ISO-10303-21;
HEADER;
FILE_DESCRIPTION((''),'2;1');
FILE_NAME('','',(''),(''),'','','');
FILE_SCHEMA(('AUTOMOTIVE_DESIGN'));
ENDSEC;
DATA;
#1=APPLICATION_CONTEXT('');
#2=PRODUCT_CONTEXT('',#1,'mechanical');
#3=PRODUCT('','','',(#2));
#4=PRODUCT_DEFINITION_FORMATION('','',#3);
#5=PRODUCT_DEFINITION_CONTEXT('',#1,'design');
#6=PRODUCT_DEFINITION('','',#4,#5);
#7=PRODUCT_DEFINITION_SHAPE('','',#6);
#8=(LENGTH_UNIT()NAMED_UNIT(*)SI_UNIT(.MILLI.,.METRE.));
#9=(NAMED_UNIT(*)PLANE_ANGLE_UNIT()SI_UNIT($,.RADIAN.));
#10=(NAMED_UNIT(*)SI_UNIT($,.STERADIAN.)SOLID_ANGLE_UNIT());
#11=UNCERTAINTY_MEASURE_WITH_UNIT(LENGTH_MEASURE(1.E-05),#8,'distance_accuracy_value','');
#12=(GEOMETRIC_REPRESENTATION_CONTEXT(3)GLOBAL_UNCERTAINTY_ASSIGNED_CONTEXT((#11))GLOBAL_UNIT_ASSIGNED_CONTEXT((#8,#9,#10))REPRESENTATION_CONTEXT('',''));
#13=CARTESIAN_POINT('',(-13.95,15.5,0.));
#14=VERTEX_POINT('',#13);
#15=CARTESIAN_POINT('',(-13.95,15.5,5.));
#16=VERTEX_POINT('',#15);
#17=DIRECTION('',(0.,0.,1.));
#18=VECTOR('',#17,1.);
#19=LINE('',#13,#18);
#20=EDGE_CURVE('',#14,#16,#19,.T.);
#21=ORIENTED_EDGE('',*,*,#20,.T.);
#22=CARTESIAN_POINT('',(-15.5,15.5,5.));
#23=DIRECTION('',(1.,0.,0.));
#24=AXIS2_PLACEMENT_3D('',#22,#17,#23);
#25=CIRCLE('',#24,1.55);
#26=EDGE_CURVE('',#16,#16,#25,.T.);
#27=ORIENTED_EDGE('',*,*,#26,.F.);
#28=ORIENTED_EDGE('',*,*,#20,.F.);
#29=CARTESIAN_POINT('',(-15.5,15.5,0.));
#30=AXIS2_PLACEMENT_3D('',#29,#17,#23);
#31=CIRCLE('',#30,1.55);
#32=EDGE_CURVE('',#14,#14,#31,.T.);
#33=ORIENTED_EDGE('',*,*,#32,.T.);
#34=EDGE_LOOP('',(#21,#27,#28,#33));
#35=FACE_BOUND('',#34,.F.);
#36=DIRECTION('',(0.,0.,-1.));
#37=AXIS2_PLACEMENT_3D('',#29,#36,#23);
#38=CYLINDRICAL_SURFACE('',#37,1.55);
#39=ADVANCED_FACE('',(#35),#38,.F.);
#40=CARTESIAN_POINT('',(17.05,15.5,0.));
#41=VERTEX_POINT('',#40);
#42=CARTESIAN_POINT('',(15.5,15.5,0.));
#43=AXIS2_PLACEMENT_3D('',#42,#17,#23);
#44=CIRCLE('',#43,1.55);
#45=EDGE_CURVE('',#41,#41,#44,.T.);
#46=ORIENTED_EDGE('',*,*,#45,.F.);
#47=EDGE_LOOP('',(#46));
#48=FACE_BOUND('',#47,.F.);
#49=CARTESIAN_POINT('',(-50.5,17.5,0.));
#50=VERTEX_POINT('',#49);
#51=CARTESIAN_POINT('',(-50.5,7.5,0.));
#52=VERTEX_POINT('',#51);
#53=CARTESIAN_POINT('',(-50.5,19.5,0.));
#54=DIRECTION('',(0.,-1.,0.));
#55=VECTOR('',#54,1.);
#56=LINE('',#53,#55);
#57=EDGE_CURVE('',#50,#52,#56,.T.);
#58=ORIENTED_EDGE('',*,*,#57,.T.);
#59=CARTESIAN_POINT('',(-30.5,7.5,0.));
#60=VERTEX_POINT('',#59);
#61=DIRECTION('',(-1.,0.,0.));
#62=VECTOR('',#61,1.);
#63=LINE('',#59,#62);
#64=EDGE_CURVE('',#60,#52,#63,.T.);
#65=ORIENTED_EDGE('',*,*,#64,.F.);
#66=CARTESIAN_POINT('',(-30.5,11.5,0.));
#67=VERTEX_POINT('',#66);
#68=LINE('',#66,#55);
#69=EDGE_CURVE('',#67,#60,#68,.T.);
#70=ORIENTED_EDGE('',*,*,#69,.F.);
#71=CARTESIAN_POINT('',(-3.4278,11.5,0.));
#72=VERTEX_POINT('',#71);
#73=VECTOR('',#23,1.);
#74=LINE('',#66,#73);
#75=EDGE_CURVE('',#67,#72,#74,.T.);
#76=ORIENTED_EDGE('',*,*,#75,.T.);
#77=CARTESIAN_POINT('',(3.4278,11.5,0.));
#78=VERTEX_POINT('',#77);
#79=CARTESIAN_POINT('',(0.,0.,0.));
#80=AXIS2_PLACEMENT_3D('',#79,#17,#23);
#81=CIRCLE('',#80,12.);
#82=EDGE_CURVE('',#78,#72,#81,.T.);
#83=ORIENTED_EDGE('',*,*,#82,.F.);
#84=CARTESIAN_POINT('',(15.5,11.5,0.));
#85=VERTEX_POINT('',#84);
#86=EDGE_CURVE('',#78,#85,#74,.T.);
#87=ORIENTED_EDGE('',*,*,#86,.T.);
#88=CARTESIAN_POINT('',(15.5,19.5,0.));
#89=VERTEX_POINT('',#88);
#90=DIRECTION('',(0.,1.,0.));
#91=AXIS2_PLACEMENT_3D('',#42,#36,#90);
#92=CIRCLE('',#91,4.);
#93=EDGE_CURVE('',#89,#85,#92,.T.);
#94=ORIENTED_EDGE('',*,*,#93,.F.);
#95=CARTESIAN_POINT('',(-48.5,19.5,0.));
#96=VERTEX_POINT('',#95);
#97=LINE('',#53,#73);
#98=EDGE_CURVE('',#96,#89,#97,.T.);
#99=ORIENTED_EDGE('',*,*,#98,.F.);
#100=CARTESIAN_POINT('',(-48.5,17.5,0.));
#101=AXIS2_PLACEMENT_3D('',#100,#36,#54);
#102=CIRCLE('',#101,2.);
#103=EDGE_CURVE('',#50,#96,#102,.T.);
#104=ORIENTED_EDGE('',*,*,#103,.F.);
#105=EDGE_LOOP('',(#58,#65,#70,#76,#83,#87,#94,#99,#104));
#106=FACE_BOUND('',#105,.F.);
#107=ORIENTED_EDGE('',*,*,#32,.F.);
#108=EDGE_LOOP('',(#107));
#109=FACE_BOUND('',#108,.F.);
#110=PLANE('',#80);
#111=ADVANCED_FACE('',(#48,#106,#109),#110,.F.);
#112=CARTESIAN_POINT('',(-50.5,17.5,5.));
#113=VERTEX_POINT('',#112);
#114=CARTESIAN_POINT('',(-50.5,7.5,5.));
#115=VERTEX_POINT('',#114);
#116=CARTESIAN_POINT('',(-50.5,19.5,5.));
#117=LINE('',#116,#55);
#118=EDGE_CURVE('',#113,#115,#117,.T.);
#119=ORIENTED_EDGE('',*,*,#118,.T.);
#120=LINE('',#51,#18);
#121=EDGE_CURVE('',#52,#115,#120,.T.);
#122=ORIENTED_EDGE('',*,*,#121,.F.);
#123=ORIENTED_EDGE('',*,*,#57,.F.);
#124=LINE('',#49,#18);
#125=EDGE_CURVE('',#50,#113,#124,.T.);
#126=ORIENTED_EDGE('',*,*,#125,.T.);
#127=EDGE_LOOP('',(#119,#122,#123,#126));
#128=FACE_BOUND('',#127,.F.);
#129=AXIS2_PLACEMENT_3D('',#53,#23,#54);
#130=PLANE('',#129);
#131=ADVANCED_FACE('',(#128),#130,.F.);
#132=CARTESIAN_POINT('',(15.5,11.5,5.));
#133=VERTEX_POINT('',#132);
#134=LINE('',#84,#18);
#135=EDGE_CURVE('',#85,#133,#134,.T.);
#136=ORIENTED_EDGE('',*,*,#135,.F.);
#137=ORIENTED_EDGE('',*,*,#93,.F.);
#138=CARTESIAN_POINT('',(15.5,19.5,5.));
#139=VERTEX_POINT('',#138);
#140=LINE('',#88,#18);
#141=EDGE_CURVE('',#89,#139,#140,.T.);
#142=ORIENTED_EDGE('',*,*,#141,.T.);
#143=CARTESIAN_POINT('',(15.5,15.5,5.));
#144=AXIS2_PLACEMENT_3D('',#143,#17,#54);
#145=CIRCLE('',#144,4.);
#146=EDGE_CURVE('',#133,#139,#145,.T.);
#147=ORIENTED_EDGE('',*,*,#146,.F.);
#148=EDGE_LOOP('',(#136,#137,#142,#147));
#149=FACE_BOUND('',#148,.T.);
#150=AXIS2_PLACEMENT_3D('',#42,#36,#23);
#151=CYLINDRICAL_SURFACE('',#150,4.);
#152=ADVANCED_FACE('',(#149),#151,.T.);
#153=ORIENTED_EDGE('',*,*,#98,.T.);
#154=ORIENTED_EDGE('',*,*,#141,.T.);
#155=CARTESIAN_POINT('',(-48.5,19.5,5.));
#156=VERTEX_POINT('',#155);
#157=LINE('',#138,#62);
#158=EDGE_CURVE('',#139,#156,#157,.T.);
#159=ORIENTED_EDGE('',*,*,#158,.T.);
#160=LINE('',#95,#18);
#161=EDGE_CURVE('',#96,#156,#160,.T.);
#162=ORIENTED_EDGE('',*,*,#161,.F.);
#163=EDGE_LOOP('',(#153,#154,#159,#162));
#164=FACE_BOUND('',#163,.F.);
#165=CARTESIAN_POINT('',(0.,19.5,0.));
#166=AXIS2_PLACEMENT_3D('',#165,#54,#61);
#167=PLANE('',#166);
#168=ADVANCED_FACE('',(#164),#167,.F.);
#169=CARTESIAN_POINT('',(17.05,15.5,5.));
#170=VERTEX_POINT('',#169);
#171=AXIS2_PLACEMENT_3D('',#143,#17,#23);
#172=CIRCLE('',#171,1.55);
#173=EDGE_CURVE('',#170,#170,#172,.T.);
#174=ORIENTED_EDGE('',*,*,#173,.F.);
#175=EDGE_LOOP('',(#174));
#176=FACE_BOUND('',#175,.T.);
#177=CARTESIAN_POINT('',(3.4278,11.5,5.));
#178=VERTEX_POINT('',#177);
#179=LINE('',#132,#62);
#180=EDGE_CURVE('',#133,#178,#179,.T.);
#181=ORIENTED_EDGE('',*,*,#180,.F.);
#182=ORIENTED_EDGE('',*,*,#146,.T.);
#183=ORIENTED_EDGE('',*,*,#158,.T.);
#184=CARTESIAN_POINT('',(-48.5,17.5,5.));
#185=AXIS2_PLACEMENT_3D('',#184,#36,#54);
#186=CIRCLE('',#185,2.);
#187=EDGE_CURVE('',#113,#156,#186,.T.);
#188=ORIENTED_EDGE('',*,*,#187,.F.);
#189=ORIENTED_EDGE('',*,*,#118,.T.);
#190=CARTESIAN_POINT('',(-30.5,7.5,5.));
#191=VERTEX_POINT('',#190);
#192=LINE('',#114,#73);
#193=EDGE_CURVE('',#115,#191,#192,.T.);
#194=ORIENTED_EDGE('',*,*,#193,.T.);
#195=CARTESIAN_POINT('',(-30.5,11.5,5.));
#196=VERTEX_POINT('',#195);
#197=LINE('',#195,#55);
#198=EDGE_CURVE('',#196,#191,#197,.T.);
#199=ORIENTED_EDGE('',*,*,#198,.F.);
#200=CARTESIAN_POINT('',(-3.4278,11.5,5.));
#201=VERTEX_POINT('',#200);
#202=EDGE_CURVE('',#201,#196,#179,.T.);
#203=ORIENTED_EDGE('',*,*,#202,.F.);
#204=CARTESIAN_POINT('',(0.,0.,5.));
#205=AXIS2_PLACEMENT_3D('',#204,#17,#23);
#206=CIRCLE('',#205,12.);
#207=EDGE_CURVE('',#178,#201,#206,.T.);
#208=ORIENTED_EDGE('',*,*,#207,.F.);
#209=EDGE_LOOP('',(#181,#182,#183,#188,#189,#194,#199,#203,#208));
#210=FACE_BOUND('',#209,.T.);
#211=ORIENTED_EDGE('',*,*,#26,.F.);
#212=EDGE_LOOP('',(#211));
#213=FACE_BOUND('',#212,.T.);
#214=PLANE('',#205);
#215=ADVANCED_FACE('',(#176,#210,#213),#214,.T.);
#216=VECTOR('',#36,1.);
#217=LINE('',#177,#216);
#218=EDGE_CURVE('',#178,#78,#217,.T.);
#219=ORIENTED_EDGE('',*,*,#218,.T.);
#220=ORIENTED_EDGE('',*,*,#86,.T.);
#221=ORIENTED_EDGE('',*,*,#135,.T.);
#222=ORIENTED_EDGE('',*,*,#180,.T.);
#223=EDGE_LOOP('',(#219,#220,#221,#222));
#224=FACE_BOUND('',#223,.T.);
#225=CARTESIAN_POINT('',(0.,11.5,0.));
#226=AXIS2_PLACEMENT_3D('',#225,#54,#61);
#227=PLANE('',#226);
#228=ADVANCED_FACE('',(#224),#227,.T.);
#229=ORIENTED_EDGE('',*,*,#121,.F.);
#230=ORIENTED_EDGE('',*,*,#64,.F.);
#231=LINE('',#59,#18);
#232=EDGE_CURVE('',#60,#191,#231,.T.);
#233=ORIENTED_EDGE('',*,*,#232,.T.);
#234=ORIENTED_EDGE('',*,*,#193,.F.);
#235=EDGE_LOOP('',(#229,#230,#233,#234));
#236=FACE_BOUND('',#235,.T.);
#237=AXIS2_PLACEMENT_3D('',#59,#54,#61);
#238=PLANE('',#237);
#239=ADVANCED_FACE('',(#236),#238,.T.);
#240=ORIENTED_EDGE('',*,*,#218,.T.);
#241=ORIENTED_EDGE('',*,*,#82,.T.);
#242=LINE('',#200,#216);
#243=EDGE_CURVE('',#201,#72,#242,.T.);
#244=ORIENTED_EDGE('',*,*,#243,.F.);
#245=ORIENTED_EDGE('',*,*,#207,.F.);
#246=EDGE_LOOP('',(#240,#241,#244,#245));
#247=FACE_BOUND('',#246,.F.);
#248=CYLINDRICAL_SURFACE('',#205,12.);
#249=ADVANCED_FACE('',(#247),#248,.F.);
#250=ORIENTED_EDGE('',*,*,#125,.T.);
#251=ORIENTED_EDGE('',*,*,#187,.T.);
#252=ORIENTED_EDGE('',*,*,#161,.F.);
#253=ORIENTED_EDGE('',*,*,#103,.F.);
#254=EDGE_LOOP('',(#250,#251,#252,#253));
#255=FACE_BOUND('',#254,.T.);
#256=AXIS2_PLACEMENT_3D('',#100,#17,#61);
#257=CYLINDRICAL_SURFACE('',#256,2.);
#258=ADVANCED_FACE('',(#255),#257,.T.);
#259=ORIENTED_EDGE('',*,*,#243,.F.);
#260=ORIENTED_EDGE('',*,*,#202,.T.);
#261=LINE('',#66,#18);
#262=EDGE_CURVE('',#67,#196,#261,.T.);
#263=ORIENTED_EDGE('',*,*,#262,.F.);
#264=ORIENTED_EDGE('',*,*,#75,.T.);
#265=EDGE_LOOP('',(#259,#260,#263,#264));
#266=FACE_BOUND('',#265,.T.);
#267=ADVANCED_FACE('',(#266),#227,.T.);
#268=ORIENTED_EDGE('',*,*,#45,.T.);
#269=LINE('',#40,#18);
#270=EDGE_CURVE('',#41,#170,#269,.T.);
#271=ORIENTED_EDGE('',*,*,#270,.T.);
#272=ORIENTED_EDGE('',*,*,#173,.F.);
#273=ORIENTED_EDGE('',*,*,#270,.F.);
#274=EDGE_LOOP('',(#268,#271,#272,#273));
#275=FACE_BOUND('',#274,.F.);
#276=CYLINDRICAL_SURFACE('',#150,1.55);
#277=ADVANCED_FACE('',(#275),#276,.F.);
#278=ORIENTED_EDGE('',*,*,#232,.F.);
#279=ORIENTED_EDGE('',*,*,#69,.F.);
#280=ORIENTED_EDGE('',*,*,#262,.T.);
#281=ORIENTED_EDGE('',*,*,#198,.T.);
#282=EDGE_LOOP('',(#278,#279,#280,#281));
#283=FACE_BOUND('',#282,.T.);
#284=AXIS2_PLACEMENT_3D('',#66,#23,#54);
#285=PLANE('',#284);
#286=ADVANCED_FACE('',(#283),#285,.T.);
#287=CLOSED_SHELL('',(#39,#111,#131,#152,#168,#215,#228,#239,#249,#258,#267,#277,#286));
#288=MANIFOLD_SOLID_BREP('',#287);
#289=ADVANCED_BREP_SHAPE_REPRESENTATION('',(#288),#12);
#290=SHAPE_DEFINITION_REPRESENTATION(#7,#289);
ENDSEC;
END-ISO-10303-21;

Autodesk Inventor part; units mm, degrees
ref_plane "YZ Plane" through (0, 0, 0) normal (1, 0, 0) x (0, 1, 0)
ref_plane "XZ Plane" through (0, 0, 0) normal (0, 1, 0) x (-1, 0, 0)
ref_plane "XY Plane" through (0, 0, 0) normal (0, 0, 1) x (1, 0, 0)
sketch "Skizze1" plane through (0, 0, 0) normal (0, 0, 1) x (1, 0, 0)
  line L0 (0, -28.5) -> (0, 27.5) projected
  line L1 (-71.9, 0) -> (35.9, 0) projected
  circle A0 centre (-15.5, 15.5) radius 1.55
  circle A1 centre (15.5, 15.5) radius 1.55
  circle A2 centre (-15.5, -15.5) radius 1.55
  circle A3 centre (15.5, -15.5) radius 1.55
  circle A4 centre (-16.5, 0) radius 11
  circle A5 centre (0, 0) radius 5.5
  circle A6 centre (-16.5, 0) radius 4
  arc A7 (-16.5, -7.5) -> (-16.5, 7.5) centre (-16.5, 0) ccw
  line L2 (-16.5, 7.5) -> (-36.5, 7.5)
  line L3 (-36.5, 7.5) -> (-56.5, 7.5)
  line L4 (-56.5, 7.5) -> (-56.5, -7.5)
  line L5 (-56.5, -7.5) -> (-16.5, -7.5)
  circle A8 centre (15.5, 15.5) radius 4
  circle A9 centre (15.5, -15.5) radius 5
  circle A10 centre (-15.5, 15.5) radius 4
  circle A11 centre (-15.5, -15.5) radius 4
  line L6 (15.5, 11.5) -> (-15.5, 11.5)
  line L7 (15.5, 19.5) -> (-15.5, 19.5)
  line L8 (-15.5, 19.5) -> (-50.5, 19.5)
  line L9 (-50.5, 19.5) -> (-50.5, 7.5)
  line L10 (-15.5, 11.5) -> (-30.5, 11.5)
  line L11 (-30.5, 11.5) -> (-30.5, 7.5)
  dimension "d0" = 3.1
  dimension "d1" = 15.5
  dimension "d2" = 15.5
  dimension "d3" = 22
  dimension "d4" = 16.5
  dimension "d5" = 11
  dimension "d6" = 8
  dimension "d7" = 15
  dimension "d10" = 15
  dimension "d11" = 40
  dimension "d17" = 8
  dimension "d18" = 10
  dimension "d19" = 8
  dimension "d20" = 8
  dimension "d22" = 35
  dimension "d23" = 15
extrude "Extrusion3" add sketch "Skizze1" along normal blind 5 contours L6 A10 L7 L0 | L0 L7 A8 L6 | L2 L3 L9 L8 A10 L10 L11 | A8 | A10
sketch "Skizze3" plane through (0, 0, 5) normal (0, 0, 1) x (1, 0, 0)
  circle A0 centre (0, 0) radius 12 projected
  circle A1 centre (-13.5, -33.5) radius 2.75 projected
  circle A2 centre (13.5, -33.5) radius 2.75 projected
  circle A3 centre (-15.5, -15.5) radius 1.75 projected
  circle A4 centre (15.5, -15.5) radius 1.75 projected
  circle A5 centre (-15.5, 15.5) radius 1.75 projected
  circle A6 centre (15.5, 15.5) radius 1.75 projected
  line L0 (19.5, -43.5) -> (21.5, -41.5) projected
  line L1 (21.5, -41.5) -> (21.5, 19.5) projected
  line L2 (21.5, 19.5) -> (19.5, 21.5) projected
  line L3 (19.5, 21.5) -> (-19.5, 21.5) projected
  line L4 (-19.5, 21.5) -> (-21.5, 19.5) projected
  line L5 (-21.5, 19.5) -> (-21.5, -41.5) projected
  line L6 (-21.5, -41.5) -> (-19.5, -43.5) projected
  line L7 (-19.5, -43.5) -> (19.5, -43.5) projected
  line L8 (-30.5, 11.5) -> (15.5, 11.5) projected
  line L9 (3.4278, 11.5) -> (-3.4278, 11.5)
  point P0 (0, 0)
extrude "Extrusion4" cut sketch "Skizze3" against normal blind 5 contours L8 A0 picked at (0.3856, 11.648)
fillet "Rundung1" radius 2 1 edges at (-50.5, 19.5, 2.5)
properties part number "Drückbrücke" material "ABS-Kunststoff"
